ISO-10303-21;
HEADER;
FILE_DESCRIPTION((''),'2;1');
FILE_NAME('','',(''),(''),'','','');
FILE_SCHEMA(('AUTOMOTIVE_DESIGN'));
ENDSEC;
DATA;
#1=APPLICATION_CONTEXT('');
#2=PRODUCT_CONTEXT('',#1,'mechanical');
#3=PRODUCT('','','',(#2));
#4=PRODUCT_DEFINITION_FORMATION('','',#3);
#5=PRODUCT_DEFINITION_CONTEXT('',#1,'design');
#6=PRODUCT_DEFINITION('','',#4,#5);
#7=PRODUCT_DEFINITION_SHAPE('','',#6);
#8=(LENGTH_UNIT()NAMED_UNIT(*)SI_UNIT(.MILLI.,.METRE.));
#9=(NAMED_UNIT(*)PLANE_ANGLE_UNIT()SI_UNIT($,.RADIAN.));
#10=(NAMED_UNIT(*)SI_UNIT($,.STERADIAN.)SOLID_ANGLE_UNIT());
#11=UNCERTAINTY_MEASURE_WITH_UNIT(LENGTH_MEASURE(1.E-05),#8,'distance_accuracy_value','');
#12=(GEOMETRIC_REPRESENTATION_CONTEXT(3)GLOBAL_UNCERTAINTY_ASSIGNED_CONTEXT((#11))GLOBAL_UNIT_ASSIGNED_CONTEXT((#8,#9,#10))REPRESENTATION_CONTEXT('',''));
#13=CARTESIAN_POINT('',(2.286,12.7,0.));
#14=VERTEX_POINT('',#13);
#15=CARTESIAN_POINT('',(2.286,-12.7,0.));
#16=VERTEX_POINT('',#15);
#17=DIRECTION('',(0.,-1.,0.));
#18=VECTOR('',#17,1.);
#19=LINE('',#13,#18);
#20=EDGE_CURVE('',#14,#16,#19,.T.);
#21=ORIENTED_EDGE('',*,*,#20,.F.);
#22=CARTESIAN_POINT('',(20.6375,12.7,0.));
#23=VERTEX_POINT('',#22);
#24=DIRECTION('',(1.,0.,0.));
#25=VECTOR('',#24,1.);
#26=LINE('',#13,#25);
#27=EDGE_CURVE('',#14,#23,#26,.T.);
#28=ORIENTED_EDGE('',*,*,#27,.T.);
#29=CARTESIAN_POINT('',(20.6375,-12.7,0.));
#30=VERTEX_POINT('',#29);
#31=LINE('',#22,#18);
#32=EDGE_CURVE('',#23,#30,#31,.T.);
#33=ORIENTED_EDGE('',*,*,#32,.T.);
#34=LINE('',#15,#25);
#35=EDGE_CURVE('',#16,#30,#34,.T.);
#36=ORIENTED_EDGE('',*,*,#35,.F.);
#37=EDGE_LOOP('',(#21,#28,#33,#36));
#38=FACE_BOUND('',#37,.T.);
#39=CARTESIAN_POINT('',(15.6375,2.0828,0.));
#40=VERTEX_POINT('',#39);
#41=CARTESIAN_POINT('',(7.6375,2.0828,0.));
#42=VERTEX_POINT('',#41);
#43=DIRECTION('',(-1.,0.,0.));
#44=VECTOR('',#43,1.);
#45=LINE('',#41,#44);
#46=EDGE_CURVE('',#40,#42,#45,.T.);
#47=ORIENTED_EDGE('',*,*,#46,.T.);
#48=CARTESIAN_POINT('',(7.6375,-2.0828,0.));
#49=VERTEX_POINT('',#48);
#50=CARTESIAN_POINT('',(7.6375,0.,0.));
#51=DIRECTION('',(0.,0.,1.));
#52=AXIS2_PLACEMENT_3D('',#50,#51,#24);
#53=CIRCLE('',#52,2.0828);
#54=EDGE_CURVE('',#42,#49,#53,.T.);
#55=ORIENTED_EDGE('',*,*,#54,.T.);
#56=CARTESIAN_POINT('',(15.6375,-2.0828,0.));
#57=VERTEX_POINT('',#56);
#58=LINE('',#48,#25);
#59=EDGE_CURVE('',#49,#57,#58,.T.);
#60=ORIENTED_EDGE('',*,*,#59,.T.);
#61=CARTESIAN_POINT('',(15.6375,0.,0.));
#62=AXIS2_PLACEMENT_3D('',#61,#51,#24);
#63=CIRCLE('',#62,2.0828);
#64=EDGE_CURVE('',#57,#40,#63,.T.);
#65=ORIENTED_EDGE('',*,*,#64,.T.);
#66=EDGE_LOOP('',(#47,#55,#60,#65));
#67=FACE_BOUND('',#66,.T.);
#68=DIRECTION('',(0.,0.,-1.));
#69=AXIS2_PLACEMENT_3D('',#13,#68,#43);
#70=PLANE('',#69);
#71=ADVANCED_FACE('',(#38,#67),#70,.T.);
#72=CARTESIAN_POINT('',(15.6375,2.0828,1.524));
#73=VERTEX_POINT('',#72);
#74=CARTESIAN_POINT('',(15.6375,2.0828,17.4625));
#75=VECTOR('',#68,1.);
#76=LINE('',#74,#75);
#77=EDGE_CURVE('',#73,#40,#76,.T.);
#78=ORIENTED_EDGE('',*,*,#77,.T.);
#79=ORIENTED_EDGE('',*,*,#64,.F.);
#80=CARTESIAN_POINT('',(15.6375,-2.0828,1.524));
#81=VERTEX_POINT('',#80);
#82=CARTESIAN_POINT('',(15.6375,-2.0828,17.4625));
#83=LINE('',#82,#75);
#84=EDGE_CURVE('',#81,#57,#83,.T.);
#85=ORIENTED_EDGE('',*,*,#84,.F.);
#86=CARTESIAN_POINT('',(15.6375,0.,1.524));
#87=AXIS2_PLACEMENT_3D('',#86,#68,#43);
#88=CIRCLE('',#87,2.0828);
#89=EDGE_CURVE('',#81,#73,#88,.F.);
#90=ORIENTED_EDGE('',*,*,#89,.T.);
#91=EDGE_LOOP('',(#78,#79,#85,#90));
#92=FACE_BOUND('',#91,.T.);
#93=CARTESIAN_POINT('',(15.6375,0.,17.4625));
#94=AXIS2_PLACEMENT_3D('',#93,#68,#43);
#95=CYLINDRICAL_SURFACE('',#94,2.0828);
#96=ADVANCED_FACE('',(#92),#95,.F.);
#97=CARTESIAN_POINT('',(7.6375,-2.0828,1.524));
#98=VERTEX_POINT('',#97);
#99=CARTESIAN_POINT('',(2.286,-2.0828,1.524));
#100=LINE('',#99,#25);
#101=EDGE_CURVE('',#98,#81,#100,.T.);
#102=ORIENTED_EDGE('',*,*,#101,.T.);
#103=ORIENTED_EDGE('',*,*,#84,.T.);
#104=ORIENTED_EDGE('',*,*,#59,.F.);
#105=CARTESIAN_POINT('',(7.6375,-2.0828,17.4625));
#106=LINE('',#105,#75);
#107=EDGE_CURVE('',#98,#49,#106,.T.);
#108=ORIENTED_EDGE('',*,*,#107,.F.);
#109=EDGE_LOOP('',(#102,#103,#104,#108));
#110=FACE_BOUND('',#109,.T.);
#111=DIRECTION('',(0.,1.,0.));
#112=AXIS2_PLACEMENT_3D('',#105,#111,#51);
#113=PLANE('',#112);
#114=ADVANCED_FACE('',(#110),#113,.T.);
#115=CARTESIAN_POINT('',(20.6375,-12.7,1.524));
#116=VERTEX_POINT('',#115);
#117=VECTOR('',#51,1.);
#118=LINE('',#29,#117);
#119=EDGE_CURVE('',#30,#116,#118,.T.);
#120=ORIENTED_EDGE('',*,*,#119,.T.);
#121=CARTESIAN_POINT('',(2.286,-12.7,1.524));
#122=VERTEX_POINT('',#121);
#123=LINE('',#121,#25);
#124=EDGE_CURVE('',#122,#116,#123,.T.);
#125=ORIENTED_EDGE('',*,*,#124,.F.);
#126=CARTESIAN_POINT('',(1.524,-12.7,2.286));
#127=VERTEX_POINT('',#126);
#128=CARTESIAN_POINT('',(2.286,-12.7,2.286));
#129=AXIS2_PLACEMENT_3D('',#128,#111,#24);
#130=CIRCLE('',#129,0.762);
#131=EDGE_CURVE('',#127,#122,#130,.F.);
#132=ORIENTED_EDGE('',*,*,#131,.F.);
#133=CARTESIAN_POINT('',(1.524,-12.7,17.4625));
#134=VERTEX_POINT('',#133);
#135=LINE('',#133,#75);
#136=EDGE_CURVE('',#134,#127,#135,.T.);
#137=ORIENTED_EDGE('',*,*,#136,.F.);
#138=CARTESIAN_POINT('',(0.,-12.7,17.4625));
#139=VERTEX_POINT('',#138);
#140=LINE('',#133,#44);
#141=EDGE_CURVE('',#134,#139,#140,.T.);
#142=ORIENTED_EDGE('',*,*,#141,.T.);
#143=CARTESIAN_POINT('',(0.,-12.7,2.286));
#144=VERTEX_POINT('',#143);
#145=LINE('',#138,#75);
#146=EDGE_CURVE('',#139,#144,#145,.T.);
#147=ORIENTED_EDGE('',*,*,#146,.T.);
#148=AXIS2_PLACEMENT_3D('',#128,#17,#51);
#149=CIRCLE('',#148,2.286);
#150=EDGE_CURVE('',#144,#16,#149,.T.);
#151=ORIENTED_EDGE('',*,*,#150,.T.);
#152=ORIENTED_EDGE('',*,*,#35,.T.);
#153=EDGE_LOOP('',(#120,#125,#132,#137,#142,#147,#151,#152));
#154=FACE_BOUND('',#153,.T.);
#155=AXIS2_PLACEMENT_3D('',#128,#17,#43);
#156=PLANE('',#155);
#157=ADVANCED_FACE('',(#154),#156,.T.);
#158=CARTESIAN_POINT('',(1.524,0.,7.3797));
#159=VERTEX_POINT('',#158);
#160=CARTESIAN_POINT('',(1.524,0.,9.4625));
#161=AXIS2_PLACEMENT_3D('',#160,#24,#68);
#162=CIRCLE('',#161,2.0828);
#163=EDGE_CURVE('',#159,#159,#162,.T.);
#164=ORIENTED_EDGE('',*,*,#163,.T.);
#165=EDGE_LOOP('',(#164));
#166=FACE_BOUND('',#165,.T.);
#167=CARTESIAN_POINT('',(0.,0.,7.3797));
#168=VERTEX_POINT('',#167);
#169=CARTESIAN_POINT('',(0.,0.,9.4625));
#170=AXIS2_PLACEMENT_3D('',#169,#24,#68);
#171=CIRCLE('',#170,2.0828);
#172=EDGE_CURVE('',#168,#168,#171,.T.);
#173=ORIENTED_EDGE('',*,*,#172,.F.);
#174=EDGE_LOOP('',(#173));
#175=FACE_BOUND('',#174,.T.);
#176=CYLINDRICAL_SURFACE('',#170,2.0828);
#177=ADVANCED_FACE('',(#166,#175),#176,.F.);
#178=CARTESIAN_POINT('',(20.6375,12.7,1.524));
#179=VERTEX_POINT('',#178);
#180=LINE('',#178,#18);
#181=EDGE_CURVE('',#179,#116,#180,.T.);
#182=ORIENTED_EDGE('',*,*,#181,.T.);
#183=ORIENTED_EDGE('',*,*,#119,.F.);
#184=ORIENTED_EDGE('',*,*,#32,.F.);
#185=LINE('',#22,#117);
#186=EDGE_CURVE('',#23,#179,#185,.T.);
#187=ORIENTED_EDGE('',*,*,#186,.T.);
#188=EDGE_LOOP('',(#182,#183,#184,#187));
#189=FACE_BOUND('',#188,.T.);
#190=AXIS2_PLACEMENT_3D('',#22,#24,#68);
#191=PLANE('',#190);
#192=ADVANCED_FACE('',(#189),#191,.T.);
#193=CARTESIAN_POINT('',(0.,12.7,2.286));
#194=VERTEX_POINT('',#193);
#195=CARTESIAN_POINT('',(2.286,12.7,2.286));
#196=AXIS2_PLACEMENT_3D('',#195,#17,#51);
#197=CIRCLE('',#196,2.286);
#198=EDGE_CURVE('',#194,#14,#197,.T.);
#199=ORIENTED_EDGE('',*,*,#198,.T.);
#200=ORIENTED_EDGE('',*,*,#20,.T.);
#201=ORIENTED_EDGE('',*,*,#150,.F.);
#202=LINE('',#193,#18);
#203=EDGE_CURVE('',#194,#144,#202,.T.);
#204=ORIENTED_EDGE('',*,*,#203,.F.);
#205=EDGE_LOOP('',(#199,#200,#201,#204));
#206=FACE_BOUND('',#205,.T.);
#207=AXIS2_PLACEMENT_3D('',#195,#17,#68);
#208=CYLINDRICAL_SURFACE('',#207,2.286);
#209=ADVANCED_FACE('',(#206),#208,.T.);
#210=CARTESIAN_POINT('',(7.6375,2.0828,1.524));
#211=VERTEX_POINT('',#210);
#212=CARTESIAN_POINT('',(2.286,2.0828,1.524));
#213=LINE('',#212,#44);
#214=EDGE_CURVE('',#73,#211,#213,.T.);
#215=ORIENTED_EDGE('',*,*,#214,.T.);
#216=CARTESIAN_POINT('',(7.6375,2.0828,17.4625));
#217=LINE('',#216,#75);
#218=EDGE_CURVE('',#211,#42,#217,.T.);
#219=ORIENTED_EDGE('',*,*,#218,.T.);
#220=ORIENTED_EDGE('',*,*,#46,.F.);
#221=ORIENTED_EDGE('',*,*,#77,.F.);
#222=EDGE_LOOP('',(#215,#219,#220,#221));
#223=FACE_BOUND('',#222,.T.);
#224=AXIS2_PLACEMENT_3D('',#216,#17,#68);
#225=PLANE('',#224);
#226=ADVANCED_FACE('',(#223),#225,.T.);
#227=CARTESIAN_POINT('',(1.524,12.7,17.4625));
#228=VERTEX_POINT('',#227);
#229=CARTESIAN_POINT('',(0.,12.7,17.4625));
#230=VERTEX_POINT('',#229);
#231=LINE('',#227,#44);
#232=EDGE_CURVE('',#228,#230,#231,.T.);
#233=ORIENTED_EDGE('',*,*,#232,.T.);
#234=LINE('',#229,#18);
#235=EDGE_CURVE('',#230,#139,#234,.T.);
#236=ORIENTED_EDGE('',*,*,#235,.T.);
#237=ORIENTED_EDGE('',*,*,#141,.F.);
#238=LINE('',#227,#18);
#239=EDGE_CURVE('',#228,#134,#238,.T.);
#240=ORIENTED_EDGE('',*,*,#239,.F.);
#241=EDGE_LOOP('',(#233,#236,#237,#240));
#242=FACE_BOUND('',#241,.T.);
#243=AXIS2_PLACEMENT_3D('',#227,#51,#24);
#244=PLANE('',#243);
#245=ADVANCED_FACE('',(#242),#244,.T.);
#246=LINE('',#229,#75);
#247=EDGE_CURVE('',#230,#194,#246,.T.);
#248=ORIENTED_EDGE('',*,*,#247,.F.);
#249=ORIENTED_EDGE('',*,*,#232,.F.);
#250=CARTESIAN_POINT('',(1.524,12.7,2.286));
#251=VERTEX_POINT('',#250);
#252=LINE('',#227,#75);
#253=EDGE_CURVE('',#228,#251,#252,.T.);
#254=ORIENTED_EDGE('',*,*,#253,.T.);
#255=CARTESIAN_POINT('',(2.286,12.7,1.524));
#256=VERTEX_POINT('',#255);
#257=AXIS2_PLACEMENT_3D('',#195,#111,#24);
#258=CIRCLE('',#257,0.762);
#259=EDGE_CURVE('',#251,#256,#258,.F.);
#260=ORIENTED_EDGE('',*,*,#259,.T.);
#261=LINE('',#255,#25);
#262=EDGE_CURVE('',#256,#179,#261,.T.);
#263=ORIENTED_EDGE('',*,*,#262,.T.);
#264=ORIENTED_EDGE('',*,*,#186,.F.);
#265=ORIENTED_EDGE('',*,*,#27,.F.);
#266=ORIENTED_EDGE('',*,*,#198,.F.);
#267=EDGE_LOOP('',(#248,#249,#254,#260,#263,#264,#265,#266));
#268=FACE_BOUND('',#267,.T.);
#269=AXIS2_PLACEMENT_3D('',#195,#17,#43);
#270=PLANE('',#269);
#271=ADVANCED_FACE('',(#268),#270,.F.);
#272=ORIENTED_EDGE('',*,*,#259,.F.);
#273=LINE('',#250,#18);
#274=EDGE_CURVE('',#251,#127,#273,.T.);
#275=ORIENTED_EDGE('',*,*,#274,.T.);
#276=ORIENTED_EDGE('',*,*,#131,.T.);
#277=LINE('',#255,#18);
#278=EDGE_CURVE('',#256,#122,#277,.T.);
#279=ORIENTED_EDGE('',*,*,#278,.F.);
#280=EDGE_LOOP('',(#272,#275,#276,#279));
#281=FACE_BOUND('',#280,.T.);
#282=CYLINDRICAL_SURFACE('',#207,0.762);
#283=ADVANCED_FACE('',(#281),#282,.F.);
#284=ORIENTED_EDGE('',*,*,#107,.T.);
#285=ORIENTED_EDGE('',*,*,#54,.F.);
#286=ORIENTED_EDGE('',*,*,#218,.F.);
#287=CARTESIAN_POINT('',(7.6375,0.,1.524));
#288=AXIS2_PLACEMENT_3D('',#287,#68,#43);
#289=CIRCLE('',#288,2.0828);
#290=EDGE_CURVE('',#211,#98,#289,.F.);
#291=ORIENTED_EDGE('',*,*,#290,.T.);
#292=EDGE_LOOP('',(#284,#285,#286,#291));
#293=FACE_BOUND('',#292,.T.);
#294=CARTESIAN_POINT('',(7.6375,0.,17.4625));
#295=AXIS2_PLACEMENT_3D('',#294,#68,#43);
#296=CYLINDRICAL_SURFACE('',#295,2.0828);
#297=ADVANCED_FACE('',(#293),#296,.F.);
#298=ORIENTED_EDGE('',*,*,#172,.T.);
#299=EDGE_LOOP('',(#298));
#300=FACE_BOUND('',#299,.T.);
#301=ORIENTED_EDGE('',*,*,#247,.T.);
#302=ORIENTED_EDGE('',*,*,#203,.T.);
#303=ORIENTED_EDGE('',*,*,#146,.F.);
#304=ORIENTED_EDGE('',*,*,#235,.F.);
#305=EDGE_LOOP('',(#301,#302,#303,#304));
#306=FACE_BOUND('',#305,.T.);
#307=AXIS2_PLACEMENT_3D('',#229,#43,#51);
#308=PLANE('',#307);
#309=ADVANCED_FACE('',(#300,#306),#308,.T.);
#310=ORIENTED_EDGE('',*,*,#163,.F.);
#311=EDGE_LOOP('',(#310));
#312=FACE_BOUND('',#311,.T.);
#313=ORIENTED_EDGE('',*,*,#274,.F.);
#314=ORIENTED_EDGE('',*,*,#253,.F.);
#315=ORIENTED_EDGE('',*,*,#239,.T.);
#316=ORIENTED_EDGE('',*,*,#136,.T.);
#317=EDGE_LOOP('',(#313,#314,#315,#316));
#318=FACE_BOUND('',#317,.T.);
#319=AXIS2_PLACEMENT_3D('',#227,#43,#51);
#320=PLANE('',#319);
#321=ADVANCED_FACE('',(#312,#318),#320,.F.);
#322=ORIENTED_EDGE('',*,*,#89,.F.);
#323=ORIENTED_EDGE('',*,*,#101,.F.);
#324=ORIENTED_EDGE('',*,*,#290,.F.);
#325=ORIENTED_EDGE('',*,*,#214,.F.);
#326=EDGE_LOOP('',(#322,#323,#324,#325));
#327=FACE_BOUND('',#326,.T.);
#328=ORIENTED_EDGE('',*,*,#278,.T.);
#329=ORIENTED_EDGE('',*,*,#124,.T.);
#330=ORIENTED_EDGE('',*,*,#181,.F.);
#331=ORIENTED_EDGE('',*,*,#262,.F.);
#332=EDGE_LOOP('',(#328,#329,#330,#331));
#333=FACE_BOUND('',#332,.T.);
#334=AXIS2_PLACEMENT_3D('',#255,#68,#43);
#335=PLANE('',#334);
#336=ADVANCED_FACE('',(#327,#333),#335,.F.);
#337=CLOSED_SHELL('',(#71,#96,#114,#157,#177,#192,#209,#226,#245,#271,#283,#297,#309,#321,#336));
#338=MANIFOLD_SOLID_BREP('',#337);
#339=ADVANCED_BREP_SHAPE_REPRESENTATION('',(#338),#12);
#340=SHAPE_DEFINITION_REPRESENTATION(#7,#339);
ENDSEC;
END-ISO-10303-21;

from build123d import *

# Parameters (mm, degrees)
EXTRUDE_THIN1_START = -12.7
EXTRUDE_THIN1_DEPTH = 25.4
SKETCH4_R           = 2.0828
EXTRUDE3_DEPTH      = 29.836691705
CUT_EXTRUDE1_DEPTH  = 30.868634259


# Read off the part's stored shape, not the designer's step: Extrude-Thin1
with BuildPart() as part:
    # Extrude-Thin1 outline → Extrude-Thin1 (new body)
    with BuildSketch(Plane(origin=(0, 0, 0), x_dir=(1, 0, 0), z_dir=(0, 1, 0)).offset(EXTRUDE_THIN1_START)):
        with BuildLine():
            Line((2.286, -1.524), (20.6375, -1.524))
            Line((20.6375, -1.524), (20.6375, 0))
            Line((20.6375, 0), (2.286, 0))
            ThreePointArc((2.286, 0), (0.669553898, -0.669553898), (0, -2.286))
            Line((0, -2.286), (0, -17.4625))
            Line((0, -17.4625), (1.524, -17.4625))
            Line((1.524, -17.4625), (1.524, -2.286))
            ThreePointArc((1.524, -2.286), (1.747184633, -1.747184633), (2.286, -1.524))
        make_face()
    extrude(amount=EXTRUDE_THIN1_DEPTH)

    # Sketch4 → Extrude3 (cut, through all)
    with BuildSketch(Plane(origin=(1.524, 0, 0), x_dir=(0, 0, -1), z_dir=(1, 0, 0))):
        with Locations((-9.4625, 0)):
            Circle(SKETCH4_R)
    extrude(amount=-EXTRUDE3_DEPTH, mode=Mode.SUBTRACT)

    # Sketch6 → Cut-Extrude1 (cut, through all)
    with BuildSketch(Plane.XY):
        with BuildLine():
            Line((7.6375, 2.0828), (15.6375, 2.0828))
            ThreePointArc((15.6375, 2.0828), (17.7203, 0), (15.6375, -2.0828))
            Line((15.6375, -2.0828), (7.6375, -2.0828))
            ThreePointArc((7.6375, -2.0828), (5.5547, 0), (7.6375, 2.0828))
        make_face()
    extrude(amount=CUT_EXTRUDE1_DEPTH, mode=Mode.SUBTRACT)


solid = part.part
